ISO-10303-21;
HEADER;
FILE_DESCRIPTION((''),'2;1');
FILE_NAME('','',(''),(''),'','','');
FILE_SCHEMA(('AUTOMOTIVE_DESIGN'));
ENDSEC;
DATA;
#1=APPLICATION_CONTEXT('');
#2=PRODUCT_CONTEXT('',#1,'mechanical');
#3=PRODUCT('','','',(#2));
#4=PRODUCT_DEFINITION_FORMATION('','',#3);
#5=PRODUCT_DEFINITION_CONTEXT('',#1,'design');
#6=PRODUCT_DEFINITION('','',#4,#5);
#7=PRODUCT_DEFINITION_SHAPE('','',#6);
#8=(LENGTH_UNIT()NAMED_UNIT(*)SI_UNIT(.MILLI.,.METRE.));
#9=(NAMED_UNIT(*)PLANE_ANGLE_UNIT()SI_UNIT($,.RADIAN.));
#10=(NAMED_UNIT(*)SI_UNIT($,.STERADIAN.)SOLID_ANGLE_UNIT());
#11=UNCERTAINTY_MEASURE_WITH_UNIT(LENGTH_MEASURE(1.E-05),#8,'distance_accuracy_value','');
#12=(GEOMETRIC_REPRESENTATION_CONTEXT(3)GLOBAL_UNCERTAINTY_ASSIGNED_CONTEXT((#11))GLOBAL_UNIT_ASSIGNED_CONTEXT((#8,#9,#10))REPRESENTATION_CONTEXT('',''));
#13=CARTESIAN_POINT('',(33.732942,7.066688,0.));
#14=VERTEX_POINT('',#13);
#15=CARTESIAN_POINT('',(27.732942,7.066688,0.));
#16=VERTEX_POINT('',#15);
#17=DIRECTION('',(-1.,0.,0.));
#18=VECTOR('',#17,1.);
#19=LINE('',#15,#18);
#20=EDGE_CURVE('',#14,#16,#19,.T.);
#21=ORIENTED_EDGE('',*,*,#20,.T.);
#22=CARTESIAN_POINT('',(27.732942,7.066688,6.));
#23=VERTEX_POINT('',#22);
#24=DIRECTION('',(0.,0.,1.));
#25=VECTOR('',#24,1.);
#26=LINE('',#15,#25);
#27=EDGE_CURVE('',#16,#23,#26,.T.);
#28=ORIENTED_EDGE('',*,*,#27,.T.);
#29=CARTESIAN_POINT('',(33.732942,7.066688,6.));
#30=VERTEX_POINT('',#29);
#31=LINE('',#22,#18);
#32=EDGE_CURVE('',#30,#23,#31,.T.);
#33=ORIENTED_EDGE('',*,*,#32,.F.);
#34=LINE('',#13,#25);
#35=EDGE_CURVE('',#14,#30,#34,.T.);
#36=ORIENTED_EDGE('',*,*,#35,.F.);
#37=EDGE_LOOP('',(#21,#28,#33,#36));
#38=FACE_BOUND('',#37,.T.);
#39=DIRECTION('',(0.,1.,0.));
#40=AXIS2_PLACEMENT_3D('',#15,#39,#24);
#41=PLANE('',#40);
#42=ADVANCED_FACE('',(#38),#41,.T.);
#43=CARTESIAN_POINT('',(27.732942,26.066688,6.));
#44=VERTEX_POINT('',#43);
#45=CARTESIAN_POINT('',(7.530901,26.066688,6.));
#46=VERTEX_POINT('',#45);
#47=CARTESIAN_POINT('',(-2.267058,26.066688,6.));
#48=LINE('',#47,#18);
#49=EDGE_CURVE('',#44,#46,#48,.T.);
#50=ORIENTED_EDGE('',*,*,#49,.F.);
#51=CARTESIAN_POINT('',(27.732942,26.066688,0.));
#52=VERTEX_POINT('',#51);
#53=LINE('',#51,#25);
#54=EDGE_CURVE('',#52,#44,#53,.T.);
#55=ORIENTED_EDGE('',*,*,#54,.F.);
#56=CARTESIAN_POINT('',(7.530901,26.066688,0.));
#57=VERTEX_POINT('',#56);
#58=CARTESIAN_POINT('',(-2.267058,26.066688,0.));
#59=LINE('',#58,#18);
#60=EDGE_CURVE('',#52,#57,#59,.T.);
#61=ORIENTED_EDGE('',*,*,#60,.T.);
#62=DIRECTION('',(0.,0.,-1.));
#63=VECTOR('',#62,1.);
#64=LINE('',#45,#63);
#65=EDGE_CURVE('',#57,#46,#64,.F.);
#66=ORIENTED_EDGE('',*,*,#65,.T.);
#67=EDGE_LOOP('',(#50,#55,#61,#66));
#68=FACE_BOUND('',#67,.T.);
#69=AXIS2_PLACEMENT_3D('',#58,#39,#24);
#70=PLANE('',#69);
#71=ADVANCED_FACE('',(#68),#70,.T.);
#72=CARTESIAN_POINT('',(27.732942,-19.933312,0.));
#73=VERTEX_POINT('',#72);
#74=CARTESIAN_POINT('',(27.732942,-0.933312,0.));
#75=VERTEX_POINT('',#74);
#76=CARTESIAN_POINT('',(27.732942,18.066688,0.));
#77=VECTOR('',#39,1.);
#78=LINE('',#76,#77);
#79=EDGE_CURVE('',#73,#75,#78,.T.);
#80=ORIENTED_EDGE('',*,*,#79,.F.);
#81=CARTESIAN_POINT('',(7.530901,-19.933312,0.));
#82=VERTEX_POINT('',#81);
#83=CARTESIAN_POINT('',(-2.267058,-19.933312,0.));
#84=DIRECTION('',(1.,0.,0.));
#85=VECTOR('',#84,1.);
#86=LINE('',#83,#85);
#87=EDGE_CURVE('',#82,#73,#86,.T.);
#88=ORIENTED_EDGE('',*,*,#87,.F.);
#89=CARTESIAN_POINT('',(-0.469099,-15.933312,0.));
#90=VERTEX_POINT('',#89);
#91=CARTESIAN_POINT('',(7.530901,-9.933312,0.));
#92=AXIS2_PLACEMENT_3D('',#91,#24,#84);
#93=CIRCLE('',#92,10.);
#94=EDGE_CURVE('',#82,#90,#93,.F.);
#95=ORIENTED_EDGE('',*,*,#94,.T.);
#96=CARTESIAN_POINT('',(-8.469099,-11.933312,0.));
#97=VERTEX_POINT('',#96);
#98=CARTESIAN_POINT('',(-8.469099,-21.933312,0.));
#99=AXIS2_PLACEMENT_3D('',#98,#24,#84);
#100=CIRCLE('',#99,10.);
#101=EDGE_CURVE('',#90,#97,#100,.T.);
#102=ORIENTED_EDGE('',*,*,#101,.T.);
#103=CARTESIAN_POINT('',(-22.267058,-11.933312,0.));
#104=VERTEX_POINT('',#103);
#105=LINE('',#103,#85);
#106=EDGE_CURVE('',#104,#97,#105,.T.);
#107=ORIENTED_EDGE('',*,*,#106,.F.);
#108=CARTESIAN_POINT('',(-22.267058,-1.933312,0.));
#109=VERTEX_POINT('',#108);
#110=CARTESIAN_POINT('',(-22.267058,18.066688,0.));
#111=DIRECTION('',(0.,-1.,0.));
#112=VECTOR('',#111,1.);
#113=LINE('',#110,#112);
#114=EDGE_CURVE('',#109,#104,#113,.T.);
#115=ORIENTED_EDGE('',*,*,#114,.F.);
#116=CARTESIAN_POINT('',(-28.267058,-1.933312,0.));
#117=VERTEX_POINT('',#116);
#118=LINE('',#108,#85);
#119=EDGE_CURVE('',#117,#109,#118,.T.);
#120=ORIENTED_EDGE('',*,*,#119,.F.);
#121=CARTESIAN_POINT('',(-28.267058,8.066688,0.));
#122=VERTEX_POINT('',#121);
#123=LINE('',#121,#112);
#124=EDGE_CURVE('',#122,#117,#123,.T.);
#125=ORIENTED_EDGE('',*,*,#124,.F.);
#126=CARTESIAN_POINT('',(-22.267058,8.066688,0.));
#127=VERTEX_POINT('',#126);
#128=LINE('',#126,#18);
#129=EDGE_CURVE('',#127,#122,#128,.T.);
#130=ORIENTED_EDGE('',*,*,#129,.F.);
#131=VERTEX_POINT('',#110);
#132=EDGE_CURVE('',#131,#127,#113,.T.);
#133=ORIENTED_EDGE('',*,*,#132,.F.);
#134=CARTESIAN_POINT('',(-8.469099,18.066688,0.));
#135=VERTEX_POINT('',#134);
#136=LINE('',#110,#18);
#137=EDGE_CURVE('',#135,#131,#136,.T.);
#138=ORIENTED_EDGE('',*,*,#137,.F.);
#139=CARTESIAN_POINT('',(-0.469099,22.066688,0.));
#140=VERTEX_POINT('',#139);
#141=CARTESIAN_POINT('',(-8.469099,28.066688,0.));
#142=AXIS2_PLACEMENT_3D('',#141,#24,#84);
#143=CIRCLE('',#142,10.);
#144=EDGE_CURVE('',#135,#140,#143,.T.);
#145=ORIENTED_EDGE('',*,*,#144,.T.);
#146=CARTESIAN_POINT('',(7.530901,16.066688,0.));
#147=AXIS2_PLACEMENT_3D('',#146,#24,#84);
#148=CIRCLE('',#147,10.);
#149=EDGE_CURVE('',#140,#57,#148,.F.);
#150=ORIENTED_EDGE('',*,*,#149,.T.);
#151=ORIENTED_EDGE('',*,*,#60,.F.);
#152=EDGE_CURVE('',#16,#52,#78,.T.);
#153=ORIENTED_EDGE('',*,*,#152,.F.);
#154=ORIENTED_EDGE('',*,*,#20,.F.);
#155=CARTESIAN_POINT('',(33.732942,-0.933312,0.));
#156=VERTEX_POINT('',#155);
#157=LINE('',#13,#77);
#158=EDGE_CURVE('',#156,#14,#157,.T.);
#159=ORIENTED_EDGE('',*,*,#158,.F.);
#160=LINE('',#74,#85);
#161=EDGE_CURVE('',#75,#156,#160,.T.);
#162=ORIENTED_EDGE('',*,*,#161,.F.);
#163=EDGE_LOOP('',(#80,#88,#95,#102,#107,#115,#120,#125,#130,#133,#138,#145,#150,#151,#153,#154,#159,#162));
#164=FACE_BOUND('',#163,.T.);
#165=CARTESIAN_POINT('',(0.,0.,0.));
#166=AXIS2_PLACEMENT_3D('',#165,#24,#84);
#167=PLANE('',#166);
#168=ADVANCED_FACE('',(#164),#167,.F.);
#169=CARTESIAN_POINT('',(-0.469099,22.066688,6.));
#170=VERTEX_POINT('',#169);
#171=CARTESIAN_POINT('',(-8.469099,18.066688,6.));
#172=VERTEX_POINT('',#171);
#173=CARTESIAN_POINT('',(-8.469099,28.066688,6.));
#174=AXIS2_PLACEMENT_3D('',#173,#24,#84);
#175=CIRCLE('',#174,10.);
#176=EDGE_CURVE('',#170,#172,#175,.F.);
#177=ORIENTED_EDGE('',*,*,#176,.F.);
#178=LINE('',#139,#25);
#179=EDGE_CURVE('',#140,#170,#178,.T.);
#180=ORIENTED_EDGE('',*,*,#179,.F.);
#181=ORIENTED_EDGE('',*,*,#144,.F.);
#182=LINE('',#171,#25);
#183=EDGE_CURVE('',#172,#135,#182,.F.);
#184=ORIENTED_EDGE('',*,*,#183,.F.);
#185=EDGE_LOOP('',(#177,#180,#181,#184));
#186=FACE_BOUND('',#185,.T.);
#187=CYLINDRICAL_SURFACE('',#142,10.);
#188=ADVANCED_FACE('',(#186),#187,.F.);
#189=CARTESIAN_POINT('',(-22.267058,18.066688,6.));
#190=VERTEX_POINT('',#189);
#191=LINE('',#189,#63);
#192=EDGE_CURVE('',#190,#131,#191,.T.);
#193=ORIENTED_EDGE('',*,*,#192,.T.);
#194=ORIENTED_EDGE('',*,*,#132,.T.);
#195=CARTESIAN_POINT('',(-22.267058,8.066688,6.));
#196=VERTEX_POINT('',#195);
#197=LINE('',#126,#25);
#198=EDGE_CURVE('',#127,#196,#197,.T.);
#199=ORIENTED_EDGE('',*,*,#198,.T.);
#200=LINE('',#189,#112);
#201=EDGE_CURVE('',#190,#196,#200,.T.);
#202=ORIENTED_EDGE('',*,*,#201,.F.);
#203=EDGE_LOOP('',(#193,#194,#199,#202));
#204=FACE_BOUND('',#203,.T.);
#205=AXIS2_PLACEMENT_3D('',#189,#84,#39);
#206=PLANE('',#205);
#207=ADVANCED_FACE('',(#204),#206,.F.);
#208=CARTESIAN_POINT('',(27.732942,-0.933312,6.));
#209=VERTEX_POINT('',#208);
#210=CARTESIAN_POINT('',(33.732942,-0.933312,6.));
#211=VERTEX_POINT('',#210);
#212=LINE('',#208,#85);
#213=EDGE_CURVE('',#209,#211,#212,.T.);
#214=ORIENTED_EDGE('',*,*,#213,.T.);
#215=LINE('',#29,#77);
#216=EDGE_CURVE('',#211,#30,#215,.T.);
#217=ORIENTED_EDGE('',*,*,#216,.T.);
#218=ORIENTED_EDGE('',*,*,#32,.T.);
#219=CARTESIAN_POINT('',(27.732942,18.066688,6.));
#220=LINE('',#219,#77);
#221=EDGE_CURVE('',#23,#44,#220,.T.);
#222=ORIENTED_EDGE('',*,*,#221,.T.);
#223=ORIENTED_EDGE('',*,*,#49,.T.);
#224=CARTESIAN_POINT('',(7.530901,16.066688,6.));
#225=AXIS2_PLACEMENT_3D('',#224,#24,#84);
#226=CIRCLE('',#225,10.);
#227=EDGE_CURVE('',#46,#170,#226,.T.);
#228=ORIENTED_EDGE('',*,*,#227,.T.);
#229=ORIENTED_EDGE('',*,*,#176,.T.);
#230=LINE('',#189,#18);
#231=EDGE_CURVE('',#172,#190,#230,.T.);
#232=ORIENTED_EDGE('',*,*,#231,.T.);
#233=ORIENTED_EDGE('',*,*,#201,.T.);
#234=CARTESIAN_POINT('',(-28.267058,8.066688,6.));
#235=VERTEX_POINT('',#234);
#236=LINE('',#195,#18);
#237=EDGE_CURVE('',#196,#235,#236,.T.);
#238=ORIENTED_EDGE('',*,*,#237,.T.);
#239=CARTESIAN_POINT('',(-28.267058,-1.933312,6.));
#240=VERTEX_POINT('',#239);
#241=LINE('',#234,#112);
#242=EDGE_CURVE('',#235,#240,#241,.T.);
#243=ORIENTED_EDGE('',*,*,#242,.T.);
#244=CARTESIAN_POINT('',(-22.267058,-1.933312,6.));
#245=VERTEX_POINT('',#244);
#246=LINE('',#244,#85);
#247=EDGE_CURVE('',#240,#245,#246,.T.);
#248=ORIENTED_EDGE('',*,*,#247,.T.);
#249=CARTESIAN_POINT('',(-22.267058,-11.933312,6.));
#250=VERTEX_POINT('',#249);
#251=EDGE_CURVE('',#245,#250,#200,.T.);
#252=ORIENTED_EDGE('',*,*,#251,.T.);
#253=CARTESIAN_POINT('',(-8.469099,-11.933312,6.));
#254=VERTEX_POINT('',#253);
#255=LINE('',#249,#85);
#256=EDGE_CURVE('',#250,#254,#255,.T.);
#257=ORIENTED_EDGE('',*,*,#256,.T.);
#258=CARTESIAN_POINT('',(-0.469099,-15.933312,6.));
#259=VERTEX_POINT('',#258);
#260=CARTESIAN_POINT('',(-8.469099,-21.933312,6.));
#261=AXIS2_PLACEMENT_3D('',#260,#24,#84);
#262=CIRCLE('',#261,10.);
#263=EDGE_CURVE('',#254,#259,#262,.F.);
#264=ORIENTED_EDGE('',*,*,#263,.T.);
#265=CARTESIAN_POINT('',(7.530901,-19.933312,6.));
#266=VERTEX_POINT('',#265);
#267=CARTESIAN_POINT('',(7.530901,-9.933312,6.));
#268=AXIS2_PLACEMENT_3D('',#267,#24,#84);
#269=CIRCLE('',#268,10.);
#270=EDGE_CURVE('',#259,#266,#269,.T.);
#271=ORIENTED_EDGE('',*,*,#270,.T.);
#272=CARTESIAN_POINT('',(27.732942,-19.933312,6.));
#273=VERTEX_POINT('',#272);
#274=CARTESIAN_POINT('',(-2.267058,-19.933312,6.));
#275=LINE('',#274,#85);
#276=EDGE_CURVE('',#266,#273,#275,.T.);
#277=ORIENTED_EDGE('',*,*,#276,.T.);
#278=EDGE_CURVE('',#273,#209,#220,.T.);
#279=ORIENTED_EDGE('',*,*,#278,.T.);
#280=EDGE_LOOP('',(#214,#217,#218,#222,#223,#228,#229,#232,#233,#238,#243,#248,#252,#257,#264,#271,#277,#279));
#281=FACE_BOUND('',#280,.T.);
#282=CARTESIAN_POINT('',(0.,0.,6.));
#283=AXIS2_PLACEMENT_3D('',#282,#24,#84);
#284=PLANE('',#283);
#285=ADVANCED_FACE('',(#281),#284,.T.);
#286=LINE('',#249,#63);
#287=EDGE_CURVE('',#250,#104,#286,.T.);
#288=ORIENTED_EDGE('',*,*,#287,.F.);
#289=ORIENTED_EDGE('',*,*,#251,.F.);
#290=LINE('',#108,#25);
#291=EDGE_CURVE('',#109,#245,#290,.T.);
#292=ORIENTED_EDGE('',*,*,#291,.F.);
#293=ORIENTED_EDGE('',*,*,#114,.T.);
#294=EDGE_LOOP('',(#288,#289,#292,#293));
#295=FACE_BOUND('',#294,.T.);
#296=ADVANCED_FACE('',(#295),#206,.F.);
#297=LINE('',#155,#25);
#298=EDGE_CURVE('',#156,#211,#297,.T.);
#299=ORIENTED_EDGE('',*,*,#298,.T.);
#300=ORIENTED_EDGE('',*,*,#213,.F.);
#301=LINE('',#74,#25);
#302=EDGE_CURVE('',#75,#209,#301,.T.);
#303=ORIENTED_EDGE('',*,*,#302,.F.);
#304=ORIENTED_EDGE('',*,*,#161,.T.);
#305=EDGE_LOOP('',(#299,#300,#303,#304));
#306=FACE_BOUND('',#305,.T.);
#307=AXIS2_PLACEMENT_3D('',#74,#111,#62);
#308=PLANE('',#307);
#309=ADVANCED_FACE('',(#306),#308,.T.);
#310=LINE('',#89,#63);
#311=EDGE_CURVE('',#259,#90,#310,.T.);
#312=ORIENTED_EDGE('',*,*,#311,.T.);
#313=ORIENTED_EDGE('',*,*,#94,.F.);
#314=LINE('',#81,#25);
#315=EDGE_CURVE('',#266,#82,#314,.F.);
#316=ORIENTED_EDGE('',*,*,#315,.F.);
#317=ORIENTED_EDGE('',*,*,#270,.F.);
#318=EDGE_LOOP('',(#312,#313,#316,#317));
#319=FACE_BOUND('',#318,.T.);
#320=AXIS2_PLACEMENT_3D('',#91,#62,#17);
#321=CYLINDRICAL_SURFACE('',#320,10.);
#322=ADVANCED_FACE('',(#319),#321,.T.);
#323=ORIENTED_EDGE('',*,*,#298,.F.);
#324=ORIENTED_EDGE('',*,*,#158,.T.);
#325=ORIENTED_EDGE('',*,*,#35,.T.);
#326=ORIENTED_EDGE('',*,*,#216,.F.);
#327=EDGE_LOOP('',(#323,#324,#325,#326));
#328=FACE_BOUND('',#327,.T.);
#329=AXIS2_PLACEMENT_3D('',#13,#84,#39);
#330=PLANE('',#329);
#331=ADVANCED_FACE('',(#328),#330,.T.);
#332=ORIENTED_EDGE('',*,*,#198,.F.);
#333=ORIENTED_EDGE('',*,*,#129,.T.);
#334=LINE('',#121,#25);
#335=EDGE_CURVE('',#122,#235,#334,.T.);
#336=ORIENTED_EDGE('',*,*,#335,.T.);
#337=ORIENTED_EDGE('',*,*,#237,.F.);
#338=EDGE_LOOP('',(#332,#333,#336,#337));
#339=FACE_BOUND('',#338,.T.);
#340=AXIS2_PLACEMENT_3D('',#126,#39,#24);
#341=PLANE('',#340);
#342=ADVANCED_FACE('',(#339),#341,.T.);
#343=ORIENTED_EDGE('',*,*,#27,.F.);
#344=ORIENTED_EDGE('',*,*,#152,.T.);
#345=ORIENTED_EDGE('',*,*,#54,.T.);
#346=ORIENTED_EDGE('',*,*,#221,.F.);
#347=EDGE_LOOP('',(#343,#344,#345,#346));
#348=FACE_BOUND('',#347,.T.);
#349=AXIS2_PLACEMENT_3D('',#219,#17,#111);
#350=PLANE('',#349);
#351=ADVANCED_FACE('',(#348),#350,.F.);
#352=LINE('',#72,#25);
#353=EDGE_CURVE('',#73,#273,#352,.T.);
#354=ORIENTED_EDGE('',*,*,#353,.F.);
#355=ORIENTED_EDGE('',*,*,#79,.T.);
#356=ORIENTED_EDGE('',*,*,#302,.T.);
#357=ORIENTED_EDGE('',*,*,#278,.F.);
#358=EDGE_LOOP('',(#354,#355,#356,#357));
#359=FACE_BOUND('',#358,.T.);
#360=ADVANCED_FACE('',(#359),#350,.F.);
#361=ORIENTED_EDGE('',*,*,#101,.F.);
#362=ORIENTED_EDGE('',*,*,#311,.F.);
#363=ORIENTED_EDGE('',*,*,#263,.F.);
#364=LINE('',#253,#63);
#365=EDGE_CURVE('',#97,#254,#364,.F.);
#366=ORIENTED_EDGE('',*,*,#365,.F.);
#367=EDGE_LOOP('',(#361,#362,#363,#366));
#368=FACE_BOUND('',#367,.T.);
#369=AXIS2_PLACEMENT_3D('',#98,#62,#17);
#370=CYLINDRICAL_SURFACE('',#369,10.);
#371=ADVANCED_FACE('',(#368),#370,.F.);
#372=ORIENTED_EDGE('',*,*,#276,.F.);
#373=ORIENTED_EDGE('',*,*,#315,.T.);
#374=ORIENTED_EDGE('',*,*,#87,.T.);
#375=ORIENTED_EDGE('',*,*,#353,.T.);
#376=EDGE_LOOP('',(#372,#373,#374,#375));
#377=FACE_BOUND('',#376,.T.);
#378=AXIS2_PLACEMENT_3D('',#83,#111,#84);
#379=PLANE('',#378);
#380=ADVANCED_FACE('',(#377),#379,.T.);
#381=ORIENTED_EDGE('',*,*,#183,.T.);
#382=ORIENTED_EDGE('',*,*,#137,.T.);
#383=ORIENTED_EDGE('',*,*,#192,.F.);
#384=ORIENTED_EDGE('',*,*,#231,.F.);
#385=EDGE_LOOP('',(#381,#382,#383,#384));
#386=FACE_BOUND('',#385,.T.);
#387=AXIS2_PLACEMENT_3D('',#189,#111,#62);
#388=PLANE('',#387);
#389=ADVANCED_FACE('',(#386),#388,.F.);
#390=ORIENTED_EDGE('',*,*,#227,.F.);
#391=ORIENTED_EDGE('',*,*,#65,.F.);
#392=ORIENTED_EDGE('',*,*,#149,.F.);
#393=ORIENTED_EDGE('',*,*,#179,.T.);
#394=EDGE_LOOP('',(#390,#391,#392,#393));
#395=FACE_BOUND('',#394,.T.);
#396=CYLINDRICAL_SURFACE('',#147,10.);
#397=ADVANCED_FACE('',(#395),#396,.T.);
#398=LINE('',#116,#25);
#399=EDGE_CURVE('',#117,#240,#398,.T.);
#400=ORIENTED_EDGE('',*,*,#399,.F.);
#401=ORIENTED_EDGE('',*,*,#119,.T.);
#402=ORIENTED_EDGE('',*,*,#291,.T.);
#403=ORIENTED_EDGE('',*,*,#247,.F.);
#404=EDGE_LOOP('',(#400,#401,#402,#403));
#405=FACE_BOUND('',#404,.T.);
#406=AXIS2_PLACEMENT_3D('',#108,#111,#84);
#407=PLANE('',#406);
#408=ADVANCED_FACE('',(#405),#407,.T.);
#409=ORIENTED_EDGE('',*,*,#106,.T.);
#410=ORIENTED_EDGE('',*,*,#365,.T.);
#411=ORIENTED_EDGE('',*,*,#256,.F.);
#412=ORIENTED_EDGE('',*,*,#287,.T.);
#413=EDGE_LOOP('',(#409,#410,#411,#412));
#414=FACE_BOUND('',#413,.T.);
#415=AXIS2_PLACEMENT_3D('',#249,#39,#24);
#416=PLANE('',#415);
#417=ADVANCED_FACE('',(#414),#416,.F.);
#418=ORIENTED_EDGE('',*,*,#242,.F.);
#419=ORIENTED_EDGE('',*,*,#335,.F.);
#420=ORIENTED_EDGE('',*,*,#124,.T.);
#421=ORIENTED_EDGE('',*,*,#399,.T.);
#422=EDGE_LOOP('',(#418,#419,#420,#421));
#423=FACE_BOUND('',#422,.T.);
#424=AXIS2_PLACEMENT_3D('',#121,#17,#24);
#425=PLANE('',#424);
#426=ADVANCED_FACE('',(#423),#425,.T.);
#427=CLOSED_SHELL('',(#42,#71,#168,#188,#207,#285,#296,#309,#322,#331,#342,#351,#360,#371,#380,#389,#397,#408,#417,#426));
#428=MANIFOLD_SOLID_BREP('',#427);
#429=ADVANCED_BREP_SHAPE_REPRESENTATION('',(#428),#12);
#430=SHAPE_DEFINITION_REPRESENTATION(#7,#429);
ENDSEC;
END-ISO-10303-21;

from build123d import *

# Parameters (mm, degrees)
ESQUISSE1_W        = 50
ESQUISSE1_H        = 30
BOSS_EXTRU_1_DEPTH = 6
ESQUISSE3_W        = 30
ESQUISSE3_H        = 8
BOSS_EXTRU_2_DEPTH = 6
CONG_1_R           = 10
CONG_2_R           = 10
CONG_3_R           = 10
CONG_4_R           = 10
ESQUISSE7_W        = 6
ESQUISSE7_H        = 10
ESQUISSE7_H_2      = 8
BOSS_EXTRU_3_DEPTH = 6


with BuildPart() as part:
    # Esquisse1 → Boss.-Extru.1 (new body)
    with BuildSketch(Plane.XY):
        with Locations((2.73294214, 3.066688104)):
            Rectangle(ESQUISSE1_W, ESQUISSE1_H)
    extrude(amount=BOSS_EXTRU_1_DEPTH)

    # Esquisse3 → Boss.-Extru.2 (add)
    with BuildSketch(Plane.XY.offset(6)):
        with Locations((12.73294214, 22.066688104)):
            Rectangle(ESQUISSE3_W, ESQUISSE3_H)
        with Locations((12.73294214, -15.933311896)):
            Rectangle(ESQUISSE3_W, ESQUISSE3_H)
    extrude(amount=-BOSS_EXTRU_2_DEPTH)

    # Congé1
    # the kernel refuses this fillet: 10 mm, written as the material it takes off along each edge
    with BuildSketch(Plane(origin=(-2.26705786, 26.066688104, 30.494897428), x_dir=(1, 0, 0), z_dir=(0, 0, -1))) as cong_1_piece_1:
        with BuildLine():
            CenterArc((9.797958971, 10), CONG_1_R, 191.536959033, 78.463040967)
            Line((0, 8), (-0.195959179, 7.96))
            ThreePointArc((-0.195959179, 7.96), (-0.2, 4), (-0.2, 0))
            Line((-0.2, 0), (0, -0.2))
            Line((0, -0.2), (9.797958971, -0.2))
            Line((9.797958971, -0.2), (9.797958971, 0))
        make_face()
    extrude(amount=54.989794856, mode=Mode.SUBTRACT)

    # Congé2
    # the kernel refuses this fillet: 10 mm, written as the material it takes off along each edge
    with BuildSketch(Plane(origin=(-2.26705786, -19.933311896, 30.494897428), x_dir=(0, 1, 0), z_dir=(0, 0, -1))) as cong_2_piece_1:
        with BuildLine():
            CenterArc((10, 9.797958971), CONG_2_R, 180, 78.463040967)
            Line((0, 9.797958971), (-0.2, 9.797958971))
            Line((-0.2, 9.797958971), (-0.2, 0))
            Line((-0.2, 0), (0, -0.2))
            ThreePointArc((0, -0.2), (4, -0.2), (7.96, -0.195959179))
            Line((7.96, -0.195959179), (8, 0))
        make_face()
    extrude(amount=54.989794856, mode=Mode.SUBTRACT)

    # Congé3
    cong_3_edges = [part.edges().sort_by_distance(p)[0] for p in [
        (-2.26705786, 18.066688104, 3),
    ]]
    fillet(cong_3_edges, radius=CONG_3_R)

    # Congé4
    cong_4_edges = [part.edges().sort_by_distance(p)[0] for p in [
        (-2.26705786, -11.933311896, 3),
    ]]
    fillet(cong_4_edges, radius=CONG_4_R)

    # Esquisse7 → Boss.-Extru.3 (add)
    with BuildSketch(Plane.XY.offset(6)):
        with Locations((-25.26705786, 3.066688104)):
            Rectangle(ESQUISSE7_W, ESQUISSE7_H)
        with Locations((30.73294214, 3.066688104)):
            Rectangle(ESQUISSE7_W, ESQUISSE7_H_2)
    extrude(amount=-BOSS_EXTRU_3_DEPTH)


solid = part.part
